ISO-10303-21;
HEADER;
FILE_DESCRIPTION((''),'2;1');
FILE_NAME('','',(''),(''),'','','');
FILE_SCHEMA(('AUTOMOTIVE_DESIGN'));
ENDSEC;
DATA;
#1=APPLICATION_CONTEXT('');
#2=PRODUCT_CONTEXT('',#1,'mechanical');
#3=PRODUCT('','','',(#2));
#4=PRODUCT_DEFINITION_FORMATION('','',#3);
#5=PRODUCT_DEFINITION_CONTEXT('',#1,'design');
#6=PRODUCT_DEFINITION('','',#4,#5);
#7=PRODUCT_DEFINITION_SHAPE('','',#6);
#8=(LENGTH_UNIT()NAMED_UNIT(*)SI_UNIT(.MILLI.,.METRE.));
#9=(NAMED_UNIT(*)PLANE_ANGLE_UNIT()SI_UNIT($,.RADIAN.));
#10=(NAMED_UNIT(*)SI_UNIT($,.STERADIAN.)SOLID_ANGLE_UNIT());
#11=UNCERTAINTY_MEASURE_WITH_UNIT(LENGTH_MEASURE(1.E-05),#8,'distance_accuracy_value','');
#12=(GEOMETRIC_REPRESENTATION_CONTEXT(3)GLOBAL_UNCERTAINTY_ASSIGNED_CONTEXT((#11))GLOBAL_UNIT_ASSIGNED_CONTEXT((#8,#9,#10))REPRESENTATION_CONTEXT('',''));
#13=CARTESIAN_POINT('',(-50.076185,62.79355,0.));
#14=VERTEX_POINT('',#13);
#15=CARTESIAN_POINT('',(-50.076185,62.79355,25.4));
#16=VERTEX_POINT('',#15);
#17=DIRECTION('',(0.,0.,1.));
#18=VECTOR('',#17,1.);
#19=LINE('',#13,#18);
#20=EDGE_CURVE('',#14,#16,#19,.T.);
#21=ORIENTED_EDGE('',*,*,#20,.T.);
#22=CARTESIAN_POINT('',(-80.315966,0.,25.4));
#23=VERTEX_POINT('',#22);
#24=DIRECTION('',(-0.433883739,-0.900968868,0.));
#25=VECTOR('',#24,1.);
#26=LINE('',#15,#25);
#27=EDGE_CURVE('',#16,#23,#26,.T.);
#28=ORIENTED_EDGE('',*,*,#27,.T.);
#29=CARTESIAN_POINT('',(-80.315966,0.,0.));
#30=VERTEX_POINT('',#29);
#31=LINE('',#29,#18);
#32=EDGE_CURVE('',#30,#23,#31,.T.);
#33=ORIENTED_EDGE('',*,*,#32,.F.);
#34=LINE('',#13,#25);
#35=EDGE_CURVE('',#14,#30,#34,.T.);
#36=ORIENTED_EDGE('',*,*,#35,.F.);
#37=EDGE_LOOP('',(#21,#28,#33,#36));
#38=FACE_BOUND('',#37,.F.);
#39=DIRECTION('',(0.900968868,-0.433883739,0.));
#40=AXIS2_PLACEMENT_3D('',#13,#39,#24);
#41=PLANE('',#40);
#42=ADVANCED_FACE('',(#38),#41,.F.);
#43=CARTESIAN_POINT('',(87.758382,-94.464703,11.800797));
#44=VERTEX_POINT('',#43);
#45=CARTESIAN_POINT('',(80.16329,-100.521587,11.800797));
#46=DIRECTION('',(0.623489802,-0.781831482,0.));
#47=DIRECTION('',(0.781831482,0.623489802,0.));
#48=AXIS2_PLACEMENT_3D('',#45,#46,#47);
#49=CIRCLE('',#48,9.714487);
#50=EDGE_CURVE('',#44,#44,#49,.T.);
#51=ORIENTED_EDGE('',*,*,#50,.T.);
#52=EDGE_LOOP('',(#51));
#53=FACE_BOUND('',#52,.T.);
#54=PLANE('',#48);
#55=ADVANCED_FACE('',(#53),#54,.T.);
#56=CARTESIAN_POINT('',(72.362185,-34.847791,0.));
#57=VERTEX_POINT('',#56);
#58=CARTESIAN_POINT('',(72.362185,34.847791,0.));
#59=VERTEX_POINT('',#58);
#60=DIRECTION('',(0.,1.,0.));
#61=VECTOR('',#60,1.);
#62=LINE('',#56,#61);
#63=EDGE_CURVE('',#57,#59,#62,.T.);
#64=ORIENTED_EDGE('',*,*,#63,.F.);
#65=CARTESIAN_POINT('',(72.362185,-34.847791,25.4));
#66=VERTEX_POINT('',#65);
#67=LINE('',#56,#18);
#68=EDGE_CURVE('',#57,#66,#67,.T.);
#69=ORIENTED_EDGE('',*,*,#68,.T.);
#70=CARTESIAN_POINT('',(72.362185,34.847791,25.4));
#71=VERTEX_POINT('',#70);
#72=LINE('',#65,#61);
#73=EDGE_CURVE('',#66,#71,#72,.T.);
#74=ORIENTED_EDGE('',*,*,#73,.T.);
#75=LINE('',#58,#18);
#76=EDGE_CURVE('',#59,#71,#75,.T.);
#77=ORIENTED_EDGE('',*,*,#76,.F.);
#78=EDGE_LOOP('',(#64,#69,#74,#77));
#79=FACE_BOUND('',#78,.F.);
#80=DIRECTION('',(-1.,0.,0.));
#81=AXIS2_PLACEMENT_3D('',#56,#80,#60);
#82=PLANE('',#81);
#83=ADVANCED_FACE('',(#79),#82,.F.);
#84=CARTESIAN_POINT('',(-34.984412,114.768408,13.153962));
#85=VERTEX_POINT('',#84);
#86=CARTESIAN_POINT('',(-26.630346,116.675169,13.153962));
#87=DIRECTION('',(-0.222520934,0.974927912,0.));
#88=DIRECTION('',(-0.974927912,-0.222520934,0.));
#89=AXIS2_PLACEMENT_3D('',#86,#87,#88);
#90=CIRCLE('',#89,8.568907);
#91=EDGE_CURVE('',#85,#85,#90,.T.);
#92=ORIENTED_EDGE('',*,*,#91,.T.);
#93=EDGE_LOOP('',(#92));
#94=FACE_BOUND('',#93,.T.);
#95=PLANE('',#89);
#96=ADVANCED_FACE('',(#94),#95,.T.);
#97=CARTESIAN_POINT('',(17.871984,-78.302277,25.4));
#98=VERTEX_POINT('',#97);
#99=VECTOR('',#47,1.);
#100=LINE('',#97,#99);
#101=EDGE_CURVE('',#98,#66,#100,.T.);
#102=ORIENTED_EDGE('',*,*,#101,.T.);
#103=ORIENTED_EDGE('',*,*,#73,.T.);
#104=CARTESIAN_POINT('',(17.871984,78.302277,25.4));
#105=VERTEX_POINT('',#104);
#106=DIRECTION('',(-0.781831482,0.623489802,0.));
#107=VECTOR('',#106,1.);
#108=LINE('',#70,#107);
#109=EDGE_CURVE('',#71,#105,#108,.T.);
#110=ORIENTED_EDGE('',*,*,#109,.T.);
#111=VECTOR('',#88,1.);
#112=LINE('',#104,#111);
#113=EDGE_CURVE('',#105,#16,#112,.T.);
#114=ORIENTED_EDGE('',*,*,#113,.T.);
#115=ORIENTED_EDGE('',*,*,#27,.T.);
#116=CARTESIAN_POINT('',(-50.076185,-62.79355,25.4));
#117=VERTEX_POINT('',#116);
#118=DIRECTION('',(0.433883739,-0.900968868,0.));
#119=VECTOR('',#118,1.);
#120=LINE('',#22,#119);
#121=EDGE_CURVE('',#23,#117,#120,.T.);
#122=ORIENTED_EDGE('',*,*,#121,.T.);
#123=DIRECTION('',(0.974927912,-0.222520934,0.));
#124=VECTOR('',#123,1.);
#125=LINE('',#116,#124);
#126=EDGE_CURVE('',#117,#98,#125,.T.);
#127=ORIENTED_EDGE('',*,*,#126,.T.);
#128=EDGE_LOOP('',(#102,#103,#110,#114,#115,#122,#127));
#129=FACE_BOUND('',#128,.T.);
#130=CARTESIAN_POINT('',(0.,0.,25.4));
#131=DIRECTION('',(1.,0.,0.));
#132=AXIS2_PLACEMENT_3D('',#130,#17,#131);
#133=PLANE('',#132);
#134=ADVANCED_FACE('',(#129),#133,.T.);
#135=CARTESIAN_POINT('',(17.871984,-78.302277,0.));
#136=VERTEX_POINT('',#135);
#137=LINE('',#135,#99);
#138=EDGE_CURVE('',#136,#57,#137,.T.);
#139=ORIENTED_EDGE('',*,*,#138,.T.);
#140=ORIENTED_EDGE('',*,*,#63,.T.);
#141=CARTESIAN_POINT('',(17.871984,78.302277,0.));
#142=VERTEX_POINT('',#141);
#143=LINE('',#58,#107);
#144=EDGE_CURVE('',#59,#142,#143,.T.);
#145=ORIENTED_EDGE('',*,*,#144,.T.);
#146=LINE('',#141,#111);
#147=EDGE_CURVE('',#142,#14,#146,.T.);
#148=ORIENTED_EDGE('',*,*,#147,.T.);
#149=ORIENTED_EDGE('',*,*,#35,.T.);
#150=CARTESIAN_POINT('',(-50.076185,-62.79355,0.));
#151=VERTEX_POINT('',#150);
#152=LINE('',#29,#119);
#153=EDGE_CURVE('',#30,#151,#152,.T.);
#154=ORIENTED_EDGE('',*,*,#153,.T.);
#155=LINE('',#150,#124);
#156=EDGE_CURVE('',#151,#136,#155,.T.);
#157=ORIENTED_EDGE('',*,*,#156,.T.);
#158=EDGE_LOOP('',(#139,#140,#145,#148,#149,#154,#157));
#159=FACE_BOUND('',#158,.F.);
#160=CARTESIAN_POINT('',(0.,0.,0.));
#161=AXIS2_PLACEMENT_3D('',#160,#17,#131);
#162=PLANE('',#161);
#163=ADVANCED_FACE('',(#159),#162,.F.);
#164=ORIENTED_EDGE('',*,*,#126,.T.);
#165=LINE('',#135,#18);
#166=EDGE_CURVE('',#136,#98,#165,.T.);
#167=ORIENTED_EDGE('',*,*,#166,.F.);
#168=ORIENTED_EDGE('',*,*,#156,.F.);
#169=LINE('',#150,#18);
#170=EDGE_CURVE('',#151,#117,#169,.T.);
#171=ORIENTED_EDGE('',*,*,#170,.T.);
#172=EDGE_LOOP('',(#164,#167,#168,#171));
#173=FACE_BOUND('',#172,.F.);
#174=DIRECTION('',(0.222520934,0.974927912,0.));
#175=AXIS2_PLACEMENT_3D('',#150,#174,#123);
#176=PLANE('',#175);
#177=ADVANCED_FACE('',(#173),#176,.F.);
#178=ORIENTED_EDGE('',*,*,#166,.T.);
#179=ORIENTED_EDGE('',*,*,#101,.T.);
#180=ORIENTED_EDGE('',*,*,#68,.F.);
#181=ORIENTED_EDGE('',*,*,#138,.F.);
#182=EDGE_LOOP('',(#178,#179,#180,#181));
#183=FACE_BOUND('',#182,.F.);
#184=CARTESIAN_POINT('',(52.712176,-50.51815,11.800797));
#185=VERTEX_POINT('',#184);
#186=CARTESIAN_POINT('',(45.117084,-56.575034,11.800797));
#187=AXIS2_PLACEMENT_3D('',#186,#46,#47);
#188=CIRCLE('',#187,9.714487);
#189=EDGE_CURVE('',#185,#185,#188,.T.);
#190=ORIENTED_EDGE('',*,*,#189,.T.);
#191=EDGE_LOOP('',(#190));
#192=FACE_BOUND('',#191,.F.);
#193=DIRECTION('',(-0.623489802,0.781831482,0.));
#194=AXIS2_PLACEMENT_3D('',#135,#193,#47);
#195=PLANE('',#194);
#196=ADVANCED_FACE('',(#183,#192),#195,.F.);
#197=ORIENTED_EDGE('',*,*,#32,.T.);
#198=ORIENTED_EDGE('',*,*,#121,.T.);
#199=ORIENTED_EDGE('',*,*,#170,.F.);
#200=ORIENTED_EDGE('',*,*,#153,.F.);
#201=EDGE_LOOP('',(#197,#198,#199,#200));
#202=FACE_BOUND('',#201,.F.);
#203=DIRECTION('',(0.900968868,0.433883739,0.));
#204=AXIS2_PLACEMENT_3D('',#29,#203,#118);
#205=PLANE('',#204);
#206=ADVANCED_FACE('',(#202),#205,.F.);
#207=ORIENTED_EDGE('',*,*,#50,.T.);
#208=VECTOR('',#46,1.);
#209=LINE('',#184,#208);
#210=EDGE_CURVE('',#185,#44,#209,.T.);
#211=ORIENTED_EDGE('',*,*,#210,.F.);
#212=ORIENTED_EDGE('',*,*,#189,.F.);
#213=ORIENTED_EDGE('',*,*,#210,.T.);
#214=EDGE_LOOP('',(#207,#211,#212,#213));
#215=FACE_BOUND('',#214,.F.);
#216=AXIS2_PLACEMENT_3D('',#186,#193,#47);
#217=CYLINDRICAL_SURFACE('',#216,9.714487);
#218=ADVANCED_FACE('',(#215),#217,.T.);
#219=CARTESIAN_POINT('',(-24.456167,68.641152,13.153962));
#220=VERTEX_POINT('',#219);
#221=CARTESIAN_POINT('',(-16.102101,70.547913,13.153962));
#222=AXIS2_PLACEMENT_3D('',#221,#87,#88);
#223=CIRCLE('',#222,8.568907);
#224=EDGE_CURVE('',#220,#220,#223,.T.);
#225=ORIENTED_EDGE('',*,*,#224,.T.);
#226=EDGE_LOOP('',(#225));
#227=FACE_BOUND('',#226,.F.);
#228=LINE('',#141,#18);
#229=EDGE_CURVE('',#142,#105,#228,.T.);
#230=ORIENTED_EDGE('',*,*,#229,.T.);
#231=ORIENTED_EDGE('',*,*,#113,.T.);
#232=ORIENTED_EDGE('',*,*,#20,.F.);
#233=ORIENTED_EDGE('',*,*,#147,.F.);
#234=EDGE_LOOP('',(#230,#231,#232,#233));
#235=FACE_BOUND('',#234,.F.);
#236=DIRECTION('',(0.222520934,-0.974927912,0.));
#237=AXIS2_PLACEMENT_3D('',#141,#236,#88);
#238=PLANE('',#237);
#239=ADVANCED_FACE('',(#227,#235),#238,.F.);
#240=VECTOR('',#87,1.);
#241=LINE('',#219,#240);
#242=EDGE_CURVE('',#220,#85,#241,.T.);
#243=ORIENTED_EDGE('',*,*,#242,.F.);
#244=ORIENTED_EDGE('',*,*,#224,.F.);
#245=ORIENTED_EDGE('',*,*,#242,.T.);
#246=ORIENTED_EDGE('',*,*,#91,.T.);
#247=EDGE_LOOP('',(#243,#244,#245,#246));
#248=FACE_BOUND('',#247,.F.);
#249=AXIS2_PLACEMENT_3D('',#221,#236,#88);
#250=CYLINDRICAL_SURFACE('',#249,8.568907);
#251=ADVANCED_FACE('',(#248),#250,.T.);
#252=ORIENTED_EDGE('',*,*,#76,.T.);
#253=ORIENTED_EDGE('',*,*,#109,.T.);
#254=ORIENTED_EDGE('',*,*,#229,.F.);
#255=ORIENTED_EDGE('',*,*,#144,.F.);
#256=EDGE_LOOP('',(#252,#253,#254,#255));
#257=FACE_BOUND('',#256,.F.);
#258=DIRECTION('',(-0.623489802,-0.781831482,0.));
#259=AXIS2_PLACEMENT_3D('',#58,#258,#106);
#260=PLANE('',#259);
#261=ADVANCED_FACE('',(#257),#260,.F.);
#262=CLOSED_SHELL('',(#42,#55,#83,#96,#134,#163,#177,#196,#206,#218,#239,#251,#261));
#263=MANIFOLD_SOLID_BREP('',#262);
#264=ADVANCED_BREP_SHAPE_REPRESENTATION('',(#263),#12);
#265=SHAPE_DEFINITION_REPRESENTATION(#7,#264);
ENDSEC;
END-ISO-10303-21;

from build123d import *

# Parameters (mm, degrees)
F1_DEPTH = 25.4
F2_R     = 9.7144872298
F3_DEPTH = 56.2097504735
F4_R     = 8.5689068518
F5_DEPTH = 47.313503921


with BuildPart() as f1:
    # F0 (on Top) → F1 (new body)
    with BuildSketch(Plane.XY):
        Polygon((72.3621845245, -34.8477914285), (72.3621845245, 34.8477914285), (17.871983658, 78.3022765744), (-50.076185425, 62.7935503844), (-80.315965515, 0), (-50.076185425, -62.7935503844), (17.871983658, -78.3022765744), align=None)
    extrude(amount=F1_DEPTH)

    # F2 (on face) → F3 (join)
    with BuildSketch(Plane(origin=(45.1170840913, -56.5750340014, 0), x_dir=(0.7818314825, 0.6234898019, 0), z_dir=(0.6234898019, -0.7818314825, 0))):
        with Locations((0, 11.8007967249)):
            Circle(F2_R)
    extrude(amount=F3_DEPTH)

    # F4 (on face) → F5 (join)
    with BuildSketch(Plane(origin=(-16.1021008835, 70.5479134794, 0), x_dir=(-0.9749279122, -0.222520934, 0), z_dir=(-0.222520934, 0.9749279122, 0))):
        with Locations((0, 13.1539618596)):
            Circle(F4_R)
    extrude(amount=F5_DEPTH)


solid = f1.part
